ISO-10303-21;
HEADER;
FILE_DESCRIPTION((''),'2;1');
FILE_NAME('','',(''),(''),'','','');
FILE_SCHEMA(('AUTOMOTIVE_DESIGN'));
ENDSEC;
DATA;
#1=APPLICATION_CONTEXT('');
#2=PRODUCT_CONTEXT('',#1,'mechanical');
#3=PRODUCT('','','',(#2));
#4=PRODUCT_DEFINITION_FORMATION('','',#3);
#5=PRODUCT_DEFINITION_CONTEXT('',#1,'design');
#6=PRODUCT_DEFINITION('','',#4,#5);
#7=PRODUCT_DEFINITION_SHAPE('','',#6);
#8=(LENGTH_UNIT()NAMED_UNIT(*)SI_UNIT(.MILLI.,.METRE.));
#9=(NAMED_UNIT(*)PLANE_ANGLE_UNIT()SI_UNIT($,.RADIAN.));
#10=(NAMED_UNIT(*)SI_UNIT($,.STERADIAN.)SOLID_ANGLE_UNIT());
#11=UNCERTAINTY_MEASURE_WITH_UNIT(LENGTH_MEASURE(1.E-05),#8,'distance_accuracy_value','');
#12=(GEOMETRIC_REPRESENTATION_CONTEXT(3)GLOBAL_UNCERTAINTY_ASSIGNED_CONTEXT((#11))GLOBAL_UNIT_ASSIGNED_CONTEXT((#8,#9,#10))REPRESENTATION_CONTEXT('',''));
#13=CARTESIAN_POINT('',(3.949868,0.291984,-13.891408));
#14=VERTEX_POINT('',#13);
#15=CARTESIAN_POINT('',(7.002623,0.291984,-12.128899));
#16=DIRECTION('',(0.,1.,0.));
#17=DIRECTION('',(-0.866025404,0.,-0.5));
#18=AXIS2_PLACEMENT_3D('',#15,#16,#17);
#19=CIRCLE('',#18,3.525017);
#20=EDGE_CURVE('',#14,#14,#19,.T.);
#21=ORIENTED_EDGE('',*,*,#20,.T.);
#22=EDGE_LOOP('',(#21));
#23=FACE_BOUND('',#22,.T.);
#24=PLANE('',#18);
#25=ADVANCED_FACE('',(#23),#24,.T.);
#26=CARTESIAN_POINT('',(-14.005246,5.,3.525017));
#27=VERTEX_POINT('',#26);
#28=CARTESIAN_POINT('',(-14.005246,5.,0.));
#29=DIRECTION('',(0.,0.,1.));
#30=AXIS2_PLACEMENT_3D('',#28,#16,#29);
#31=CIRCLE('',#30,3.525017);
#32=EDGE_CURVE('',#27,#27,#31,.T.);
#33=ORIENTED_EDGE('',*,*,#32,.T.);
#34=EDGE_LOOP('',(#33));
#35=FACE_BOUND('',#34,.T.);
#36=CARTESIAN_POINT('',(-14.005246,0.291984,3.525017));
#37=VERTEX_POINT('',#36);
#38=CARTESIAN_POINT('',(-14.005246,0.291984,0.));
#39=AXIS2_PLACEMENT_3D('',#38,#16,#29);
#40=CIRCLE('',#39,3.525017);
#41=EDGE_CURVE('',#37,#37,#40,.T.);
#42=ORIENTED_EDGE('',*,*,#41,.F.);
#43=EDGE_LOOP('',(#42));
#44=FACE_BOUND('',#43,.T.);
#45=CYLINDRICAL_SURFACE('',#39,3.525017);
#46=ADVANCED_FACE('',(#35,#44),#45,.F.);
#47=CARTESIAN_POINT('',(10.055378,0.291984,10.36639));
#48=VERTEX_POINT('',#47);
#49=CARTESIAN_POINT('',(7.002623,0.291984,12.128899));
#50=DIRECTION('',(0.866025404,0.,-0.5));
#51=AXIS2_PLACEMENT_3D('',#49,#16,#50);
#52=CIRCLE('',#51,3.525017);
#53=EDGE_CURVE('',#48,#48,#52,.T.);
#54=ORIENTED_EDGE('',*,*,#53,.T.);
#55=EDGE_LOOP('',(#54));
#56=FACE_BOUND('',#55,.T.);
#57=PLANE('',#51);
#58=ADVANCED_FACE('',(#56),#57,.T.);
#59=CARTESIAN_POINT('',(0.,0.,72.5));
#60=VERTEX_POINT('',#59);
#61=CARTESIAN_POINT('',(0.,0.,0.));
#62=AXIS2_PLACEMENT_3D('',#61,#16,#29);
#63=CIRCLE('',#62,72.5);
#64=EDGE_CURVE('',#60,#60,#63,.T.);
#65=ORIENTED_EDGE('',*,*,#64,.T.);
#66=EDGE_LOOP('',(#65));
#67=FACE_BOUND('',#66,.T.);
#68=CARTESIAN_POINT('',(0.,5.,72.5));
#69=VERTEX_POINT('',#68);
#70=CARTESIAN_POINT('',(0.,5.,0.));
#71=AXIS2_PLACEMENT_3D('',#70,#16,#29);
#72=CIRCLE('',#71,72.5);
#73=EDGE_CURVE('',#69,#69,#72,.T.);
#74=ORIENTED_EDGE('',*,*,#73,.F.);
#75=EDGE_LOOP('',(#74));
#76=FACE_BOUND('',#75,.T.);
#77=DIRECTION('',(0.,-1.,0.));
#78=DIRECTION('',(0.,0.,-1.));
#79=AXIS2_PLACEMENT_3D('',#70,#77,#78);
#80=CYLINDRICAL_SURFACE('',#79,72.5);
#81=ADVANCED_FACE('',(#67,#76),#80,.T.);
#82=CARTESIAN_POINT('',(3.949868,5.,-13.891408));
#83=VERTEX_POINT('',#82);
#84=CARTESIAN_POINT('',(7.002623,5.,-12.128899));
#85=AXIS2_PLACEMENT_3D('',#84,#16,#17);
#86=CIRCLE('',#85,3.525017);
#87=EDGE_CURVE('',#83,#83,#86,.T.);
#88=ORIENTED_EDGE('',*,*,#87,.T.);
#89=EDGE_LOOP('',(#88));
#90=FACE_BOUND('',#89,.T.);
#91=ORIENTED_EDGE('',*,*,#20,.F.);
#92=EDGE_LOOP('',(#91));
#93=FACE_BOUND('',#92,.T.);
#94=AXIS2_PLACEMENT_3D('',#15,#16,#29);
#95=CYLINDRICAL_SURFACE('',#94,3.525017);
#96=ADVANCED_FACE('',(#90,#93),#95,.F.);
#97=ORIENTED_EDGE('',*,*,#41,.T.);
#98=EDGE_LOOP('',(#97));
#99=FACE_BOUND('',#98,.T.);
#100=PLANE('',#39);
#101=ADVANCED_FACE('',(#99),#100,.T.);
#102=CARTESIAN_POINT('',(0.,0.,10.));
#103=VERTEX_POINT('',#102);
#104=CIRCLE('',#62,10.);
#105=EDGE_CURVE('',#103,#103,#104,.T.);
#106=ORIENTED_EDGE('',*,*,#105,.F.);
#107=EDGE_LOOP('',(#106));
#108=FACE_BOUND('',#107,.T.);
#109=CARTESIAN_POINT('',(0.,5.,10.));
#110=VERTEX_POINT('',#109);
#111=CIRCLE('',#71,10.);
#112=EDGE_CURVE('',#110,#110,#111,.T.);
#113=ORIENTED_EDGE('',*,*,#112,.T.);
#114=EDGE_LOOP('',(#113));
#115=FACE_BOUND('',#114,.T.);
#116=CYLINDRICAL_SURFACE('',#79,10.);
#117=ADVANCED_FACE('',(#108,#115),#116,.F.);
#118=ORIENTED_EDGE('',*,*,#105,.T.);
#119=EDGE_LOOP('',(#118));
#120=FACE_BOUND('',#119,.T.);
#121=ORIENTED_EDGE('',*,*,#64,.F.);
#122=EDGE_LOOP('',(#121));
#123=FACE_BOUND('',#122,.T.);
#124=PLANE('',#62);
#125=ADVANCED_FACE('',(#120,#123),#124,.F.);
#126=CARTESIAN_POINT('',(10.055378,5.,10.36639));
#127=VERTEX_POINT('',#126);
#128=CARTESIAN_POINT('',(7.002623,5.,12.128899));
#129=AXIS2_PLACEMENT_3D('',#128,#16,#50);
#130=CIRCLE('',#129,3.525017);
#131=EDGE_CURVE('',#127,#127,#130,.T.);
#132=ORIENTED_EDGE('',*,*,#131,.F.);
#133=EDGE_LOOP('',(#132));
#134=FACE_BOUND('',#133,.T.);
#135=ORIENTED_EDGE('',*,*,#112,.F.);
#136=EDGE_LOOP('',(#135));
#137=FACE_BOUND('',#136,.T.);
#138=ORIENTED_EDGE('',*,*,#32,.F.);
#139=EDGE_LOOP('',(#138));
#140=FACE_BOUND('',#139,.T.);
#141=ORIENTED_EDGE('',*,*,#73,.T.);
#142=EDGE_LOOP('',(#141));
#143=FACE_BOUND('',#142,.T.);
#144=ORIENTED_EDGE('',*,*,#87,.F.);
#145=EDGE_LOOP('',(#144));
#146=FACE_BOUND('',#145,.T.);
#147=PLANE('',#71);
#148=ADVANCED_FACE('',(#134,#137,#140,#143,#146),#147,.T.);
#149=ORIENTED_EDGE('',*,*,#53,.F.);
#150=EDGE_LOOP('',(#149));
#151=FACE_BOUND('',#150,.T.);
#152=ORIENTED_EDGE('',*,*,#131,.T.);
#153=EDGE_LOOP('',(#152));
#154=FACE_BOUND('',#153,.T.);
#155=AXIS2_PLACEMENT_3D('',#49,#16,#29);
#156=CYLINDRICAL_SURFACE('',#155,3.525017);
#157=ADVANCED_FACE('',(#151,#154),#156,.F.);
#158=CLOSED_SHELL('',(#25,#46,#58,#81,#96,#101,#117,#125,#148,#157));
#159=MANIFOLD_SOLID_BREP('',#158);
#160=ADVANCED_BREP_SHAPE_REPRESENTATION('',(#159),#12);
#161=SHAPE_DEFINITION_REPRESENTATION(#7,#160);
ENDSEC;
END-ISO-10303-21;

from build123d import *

# Parameters (mm, degrees)
SKETCH1_R           = 72.5
BOSS_EXTRUDE1_DEPTH = 5
SKETCH2_R           = 10
CUT_EXTRUDE1_DEPTH  = 103.652325838
SKETCH3_R           = 3.525017378
CUT_EXTRUDE2_DEPTH  = 4.708016116
CIRPATTERN1_COUNT   = 3


with BuildPart() as part:
    # Sketch1 → Boss-Extrude1 (new body)
    with BuildSketch(Plane(origin=(0, 0, 0), x_dir=(1, 0, 0), z_dir=(0, 1, 0))):
        Circle(SKETCH1_R)
    extrude(amount=BOSS_EXTRUDE1_DEPTH)

    # Sketch2 → Cut-Extrude1 (cut, through all)
    with BuildSketch(Plane(origin=(0, 0, 0), x_dir=(1, 0, 0), z_dir=(0, 1, 0))):
        Circle(SKETCH2_R)
    extrude(amount=CUT_EXTRUDE1_DEPTH, mode=Mode.SUBTRACT)

    # Sketch3 → Cut-Extrude2 (cut)
    with BuildSketch(Plane(origin=(0, 5, 0), x_dir=(1, 0, 0), z_dir=(0, 1, 0))):
        with Locations((-14.005246001, 0)):
            Circle(SKETCH3_R)
    cut_extrude2 = extrude(amount=-CUT_EXTRUDE2_DEPTH, mode=Mode.SUBTRACT)

    # CirPattern1: Cut-Extrude2 ×3 about axis
    cirpattern1_axis = Axis((0, 0, 0), (0, 1, 0))
    for i in range(1, CIRPATTERN1_COUNT):
        add(cut_extrude2.rotate(cirpattern1_axis, i * 360 / CIRPATTERN1_COUNT), mode=Mode.SUBTRACT)


solid = part.part
